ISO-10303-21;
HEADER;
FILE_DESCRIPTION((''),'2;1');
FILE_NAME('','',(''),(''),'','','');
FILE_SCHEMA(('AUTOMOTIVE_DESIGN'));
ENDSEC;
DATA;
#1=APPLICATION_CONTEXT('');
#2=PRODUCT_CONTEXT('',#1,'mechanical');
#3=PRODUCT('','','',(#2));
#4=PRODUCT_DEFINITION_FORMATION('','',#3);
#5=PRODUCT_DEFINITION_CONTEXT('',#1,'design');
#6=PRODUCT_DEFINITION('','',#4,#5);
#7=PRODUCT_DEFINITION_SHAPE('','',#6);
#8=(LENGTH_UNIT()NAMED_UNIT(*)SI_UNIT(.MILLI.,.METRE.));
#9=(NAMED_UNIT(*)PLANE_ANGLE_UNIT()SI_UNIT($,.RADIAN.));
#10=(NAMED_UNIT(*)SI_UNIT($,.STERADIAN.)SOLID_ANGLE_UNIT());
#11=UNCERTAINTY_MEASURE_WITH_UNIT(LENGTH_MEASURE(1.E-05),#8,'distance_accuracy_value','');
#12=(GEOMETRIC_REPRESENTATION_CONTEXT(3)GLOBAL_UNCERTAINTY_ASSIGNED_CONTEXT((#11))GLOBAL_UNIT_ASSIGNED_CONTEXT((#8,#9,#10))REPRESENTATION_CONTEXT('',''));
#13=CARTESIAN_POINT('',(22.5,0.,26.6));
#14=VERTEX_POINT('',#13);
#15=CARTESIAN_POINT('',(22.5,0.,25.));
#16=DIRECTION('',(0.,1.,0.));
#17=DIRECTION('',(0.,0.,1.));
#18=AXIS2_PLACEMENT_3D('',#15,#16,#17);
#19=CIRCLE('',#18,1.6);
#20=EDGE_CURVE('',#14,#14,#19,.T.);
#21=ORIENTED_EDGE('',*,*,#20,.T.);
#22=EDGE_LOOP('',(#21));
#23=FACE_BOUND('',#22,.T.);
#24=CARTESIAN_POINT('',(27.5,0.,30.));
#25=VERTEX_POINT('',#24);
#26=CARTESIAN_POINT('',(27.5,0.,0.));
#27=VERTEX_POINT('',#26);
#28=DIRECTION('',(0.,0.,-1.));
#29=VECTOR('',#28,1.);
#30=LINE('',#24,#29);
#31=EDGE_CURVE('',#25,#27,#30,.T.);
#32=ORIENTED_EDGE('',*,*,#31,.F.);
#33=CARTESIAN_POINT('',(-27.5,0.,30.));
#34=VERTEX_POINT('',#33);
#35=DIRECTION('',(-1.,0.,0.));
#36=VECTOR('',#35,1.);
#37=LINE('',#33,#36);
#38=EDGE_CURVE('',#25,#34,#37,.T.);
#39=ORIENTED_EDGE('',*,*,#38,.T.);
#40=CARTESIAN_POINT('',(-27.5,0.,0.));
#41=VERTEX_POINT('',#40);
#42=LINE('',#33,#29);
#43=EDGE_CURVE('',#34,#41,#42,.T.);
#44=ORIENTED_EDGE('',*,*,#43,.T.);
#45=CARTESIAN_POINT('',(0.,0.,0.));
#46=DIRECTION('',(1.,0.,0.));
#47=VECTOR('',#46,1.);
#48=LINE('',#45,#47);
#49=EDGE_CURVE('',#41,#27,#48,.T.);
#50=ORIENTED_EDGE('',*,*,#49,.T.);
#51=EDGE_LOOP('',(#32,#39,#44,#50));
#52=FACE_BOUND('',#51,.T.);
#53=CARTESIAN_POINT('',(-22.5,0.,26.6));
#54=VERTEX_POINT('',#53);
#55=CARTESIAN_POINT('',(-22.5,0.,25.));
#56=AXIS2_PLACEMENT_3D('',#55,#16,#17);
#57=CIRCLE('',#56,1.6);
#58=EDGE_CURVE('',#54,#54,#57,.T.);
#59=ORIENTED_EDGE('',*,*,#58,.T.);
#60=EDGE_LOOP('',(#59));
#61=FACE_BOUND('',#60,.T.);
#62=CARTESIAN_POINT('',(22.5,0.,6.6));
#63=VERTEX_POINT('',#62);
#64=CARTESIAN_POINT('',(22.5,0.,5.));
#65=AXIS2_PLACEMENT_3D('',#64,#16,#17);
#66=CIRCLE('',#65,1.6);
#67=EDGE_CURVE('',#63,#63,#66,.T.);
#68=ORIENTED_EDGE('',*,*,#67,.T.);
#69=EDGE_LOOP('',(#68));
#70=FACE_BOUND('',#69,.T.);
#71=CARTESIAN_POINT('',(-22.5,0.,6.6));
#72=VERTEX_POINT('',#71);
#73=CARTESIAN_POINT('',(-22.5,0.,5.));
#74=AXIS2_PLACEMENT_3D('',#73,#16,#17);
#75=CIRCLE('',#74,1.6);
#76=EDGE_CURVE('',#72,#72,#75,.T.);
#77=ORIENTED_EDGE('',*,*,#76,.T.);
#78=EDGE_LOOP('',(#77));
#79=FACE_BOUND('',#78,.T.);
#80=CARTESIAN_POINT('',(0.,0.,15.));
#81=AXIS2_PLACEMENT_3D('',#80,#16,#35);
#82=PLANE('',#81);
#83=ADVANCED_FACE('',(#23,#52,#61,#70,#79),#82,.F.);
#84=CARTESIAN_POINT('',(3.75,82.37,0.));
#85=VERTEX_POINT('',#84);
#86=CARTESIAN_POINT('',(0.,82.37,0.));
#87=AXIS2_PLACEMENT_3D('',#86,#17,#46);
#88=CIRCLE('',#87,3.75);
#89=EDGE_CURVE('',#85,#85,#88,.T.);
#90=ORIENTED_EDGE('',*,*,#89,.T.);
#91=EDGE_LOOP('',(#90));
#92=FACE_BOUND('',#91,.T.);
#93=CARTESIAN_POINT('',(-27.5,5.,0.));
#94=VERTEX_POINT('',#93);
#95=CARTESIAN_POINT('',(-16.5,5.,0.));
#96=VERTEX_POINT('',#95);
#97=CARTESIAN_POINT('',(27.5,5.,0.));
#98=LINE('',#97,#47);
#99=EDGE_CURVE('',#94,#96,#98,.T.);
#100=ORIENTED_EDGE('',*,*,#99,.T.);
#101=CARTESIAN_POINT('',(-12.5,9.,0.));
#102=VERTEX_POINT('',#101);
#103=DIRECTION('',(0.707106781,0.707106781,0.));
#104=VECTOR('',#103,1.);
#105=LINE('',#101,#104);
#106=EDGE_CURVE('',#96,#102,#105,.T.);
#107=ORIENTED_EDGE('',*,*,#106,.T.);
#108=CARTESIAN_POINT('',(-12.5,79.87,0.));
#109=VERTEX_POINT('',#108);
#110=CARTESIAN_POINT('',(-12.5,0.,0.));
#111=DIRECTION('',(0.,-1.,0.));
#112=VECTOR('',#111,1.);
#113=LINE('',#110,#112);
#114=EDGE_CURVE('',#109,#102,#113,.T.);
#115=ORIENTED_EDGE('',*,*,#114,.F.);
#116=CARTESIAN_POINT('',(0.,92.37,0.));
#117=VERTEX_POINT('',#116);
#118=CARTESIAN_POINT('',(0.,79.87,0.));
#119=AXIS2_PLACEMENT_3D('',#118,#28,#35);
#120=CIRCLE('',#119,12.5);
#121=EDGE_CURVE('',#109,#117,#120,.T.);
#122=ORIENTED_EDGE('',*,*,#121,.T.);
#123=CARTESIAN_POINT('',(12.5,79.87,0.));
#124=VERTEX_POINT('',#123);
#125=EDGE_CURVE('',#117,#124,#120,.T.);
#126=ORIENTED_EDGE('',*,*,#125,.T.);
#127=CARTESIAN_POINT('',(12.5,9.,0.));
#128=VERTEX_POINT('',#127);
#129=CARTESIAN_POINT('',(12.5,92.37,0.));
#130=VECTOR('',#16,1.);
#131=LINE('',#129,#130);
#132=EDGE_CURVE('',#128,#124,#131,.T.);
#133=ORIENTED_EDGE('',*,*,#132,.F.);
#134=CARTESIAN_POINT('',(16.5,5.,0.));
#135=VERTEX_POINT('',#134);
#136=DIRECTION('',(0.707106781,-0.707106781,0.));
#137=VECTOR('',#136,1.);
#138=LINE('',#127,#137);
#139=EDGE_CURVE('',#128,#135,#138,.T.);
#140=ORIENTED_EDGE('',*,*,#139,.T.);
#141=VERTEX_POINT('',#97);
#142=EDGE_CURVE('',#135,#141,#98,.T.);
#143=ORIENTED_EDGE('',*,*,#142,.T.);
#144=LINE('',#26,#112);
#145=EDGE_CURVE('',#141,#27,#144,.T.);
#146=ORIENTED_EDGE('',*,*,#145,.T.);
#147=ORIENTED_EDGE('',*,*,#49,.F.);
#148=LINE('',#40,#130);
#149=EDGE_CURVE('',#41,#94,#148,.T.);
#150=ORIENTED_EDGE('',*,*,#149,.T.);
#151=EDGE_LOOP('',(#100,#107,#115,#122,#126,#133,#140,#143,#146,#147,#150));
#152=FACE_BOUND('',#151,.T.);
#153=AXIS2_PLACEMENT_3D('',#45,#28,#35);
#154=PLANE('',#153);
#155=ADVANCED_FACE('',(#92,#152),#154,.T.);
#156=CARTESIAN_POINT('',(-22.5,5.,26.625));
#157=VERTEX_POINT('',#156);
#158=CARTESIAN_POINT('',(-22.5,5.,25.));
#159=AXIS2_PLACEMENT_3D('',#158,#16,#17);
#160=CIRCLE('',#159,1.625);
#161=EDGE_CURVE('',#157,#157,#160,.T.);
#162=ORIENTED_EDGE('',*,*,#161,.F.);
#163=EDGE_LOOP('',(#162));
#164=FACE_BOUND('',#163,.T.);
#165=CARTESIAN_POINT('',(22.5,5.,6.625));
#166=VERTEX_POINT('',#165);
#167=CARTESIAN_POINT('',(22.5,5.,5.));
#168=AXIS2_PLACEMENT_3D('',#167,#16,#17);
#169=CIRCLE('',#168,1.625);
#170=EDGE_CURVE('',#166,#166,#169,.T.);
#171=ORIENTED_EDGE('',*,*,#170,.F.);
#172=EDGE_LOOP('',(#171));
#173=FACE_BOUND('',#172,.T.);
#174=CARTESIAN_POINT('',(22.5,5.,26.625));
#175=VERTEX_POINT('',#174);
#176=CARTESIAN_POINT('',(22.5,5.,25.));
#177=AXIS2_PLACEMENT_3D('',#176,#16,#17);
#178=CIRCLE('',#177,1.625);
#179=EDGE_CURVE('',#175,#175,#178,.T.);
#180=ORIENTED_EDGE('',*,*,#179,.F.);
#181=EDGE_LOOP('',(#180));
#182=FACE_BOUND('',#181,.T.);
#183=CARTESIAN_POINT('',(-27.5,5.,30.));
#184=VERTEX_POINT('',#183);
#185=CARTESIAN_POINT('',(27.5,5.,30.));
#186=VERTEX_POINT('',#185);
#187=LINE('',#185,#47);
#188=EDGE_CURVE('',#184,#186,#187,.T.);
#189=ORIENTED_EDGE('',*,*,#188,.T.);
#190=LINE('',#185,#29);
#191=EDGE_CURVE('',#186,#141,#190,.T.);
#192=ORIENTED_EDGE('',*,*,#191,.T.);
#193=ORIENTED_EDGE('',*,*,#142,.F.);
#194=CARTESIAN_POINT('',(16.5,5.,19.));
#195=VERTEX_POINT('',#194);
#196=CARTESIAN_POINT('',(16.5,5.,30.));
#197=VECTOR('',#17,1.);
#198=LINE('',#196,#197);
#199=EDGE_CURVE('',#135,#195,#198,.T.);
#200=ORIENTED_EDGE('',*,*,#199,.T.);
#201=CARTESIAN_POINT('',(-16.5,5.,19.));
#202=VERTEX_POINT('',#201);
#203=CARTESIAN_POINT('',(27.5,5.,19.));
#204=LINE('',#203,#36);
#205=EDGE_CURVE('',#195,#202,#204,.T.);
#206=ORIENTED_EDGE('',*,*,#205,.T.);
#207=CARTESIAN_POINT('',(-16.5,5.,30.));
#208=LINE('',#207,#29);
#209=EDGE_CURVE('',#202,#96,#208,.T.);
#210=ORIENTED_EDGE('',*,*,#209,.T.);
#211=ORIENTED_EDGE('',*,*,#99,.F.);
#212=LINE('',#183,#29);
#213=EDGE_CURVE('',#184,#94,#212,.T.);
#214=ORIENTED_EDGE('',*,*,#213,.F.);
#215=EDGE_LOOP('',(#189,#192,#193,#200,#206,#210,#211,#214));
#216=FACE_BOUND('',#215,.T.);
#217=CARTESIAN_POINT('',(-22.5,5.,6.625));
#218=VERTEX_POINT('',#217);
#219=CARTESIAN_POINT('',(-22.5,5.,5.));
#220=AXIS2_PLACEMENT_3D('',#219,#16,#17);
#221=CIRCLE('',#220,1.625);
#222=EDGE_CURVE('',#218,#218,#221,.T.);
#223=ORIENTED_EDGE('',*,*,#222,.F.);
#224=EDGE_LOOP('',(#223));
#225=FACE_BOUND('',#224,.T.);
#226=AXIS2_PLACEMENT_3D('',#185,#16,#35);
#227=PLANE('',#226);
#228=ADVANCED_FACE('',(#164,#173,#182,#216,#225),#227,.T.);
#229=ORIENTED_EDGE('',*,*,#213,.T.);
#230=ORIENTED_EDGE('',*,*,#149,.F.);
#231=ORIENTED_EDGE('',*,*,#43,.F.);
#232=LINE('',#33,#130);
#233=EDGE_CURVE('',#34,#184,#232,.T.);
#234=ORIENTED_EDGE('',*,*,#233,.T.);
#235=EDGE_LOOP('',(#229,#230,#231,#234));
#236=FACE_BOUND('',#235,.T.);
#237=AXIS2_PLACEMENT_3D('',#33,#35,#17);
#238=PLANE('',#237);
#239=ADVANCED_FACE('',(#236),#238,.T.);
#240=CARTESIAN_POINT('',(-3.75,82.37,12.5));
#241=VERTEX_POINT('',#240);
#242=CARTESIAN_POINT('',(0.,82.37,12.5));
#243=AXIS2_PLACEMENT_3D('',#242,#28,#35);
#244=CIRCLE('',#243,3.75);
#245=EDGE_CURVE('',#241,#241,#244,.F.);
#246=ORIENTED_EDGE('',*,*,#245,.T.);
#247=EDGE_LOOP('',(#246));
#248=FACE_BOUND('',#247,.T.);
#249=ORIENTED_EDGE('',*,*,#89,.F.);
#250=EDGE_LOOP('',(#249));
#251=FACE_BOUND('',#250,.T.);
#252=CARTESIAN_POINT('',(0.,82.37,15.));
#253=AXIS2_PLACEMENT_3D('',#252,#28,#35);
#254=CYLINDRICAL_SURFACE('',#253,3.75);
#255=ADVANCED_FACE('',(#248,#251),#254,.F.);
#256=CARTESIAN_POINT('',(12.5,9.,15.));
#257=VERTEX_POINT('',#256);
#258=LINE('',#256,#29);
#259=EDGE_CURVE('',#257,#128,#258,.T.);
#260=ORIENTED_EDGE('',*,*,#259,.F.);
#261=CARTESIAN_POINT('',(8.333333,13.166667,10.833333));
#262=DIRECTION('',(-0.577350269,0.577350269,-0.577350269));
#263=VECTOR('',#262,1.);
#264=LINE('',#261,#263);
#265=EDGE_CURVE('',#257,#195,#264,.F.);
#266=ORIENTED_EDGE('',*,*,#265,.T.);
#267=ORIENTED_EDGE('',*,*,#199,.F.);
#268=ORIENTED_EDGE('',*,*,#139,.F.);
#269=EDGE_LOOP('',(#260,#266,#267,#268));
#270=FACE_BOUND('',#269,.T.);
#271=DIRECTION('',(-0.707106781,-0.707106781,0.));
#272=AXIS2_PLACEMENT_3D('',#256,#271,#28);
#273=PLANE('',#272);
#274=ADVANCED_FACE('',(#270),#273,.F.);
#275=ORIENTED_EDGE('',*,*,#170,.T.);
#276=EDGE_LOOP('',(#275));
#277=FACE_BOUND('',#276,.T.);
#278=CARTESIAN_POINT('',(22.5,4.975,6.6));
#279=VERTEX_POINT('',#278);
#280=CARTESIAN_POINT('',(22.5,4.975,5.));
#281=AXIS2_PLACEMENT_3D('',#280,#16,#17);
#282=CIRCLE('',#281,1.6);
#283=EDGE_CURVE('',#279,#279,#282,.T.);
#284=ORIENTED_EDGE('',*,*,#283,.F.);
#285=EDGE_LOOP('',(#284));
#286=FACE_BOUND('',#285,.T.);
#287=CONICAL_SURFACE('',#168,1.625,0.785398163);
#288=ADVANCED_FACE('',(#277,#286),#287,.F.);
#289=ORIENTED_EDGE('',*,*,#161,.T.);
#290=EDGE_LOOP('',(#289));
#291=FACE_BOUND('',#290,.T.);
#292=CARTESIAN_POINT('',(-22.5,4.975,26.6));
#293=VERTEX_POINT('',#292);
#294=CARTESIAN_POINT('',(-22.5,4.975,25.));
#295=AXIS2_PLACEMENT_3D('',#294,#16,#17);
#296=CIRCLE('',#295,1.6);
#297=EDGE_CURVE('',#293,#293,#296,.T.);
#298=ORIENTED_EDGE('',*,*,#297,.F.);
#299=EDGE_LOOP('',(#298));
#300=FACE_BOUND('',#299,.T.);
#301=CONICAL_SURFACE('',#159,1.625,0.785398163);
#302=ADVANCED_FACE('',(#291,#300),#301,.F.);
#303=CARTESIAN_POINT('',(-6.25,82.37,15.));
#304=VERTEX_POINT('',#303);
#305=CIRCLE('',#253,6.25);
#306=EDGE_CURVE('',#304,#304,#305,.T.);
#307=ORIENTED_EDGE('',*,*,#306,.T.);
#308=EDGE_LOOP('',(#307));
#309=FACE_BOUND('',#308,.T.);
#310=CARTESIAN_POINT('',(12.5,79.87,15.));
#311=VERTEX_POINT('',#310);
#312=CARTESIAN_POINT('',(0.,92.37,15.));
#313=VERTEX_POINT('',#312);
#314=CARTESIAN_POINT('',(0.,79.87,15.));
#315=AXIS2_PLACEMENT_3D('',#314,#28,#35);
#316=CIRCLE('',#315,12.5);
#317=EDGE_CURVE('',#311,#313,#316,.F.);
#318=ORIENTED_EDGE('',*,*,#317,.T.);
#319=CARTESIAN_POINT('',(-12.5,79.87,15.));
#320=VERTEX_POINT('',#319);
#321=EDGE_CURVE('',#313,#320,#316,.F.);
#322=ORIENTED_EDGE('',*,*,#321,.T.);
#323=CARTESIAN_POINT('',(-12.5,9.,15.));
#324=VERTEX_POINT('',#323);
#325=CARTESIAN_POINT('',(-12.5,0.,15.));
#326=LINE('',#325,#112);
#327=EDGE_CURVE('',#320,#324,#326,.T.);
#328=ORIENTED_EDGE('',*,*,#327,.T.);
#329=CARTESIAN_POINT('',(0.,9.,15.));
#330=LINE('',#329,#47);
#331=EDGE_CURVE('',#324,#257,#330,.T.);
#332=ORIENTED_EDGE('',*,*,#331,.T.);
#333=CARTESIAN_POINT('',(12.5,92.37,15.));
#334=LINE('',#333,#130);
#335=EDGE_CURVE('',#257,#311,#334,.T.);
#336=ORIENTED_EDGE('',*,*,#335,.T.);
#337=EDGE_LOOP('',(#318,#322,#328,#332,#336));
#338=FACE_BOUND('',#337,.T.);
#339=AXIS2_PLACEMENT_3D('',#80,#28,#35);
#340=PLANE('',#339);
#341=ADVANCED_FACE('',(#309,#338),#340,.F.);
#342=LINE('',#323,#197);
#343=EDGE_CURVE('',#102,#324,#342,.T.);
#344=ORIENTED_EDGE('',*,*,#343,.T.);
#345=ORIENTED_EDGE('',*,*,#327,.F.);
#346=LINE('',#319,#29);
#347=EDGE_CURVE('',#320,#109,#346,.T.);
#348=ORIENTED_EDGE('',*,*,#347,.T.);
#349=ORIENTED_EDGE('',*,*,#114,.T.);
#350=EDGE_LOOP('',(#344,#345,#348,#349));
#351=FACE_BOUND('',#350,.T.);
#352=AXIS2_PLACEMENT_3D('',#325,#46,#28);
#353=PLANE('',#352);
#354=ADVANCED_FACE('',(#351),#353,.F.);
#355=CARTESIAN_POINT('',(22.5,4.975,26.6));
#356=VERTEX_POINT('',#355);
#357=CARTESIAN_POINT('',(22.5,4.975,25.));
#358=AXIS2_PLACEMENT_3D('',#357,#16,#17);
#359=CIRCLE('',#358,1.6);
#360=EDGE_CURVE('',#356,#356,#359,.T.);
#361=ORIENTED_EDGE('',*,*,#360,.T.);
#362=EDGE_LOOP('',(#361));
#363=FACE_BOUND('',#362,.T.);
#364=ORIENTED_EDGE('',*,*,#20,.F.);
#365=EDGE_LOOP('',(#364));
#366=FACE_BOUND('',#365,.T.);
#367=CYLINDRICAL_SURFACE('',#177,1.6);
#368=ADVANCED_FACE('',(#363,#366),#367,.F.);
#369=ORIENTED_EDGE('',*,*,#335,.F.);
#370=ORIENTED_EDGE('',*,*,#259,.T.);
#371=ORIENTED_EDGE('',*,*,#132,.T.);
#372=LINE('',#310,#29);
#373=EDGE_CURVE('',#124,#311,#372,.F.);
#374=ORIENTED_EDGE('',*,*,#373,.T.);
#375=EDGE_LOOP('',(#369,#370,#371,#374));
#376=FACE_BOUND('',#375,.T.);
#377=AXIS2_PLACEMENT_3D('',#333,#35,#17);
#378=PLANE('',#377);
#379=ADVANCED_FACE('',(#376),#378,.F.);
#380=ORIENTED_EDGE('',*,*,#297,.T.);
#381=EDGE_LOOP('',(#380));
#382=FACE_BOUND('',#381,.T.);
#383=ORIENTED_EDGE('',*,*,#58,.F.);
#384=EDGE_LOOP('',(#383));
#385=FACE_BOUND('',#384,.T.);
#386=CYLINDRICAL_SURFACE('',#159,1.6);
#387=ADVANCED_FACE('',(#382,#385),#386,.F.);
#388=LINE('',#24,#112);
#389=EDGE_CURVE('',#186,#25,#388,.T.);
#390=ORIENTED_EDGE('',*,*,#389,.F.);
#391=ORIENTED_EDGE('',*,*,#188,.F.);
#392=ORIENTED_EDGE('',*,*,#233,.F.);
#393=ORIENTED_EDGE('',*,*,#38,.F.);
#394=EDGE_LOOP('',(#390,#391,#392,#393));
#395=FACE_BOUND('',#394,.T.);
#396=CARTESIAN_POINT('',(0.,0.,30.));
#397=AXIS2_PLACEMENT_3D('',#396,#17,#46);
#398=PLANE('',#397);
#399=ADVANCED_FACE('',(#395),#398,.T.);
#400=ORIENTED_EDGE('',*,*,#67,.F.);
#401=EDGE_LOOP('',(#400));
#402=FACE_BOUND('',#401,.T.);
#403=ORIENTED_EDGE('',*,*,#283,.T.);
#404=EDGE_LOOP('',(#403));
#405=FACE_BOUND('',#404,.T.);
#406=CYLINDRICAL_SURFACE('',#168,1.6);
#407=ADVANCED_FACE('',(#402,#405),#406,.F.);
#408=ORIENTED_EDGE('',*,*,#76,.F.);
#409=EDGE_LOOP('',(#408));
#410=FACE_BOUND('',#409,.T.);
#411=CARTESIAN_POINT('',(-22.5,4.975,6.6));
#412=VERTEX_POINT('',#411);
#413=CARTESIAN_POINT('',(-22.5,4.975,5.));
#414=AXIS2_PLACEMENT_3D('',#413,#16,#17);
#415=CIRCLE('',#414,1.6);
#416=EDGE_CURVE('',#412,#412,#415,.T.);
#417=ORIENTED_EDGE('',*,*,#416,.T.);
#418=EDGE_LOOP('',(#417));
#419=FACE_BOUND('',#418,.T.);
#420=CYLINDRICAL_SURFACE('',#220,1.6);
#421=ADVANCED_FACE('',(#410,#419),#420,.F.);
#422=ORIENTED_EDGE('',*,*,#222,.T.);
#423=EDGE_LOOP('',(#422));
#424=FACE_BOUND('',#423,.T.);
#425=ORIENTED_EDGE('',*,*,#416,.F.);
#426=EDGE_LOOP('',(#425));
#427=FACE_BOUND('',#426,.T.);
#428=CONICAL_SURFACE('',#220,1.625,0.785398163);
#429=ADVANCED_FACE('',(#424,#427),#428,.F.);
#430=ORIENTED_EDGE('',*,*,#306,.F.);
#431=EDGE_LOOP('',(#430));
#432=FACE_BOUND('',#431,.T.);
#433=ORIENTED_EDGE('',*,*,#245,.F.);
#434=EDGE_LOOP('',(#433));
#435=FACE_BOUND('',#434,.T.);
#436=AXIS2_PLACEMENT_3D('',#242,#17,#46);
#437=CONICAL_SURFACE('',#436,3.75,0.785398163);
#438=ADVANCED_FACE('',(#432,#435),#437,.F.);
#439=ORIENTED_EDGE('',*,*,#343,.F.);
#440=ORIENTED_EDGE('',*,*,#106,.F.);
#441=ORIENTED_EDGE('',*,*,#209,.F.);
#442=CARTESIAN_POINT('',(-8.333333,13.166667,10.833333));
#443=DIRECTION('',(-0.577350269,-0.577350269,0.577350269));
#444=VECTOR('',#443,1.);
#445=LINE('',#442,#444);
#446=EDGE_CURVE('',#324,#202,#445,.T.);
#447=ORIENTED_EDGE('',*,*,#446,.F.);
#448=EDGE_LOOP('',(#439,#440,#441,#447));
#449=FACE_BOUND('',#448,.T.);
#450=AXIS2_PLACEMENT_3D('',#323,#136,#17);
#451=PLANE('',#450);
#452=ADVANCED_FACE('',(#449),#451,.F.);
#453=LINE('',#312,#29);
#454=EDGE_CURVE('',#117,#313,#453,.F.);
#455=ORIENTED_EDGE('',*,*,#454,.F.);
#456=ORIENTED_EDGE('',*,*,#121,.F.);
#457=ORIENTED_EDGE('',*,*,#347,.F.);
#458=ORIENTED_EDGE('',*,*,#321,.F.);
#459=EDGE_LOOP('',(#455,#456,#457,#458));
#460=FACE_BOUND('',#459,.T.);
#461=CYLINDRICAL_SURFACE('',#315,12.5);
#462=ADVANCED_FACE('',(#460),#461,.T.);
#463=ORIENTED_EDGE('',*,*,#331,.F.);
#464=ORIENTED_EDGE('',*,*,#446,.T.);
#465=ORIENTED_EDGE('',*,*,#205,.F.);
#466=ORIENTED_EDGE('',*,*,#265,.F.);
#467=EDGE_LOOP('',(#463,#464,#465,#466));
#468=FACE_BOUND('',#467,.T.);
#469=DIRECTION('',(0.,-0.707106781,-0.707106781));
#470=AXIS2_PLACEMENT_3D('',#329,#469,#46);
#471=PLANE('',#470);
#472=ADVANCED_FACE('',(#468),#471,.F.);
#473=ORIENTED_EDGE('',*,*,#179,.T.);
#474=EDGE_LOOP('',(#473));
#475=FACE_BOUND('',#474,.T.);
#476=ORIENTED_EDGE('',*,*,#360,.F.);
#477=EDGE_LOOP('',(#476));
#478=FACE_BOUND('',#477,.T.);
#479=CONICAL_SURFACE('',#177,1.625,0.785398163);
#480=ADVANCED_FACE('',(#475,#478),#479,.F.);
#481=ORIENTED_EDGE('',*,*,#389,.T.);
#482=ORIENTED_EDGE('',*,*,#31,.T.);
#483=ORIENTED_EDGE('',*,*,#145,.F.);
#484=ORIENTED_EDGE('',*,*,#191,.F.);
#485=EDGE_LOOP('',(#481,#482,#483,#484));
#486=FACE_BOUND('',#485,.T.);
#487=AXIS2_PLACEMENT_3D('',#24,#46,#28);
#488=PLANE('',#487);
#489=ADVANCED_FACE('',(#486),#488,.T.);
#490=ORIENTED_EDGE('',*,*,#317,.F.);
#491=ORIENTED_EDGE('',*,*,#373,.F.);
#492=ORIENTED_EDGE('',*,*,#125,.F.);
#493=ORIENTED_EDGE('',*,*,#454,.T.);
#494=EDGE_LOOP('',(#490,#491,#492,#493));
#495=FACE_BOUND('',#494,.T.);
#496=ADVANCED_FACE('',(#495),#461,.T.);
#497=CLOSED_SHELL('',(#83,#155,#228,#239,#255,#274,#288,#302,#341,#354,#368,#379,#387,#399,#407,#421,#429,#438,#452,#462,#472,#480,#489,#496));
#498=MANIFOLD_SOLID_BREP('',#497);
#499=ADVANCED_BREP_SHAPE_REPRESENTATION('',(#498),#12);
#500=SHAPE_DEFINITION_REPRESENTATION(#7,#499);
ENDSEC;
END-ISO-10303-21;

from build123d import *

# Parameters (mm, degrees)
SKETCH1_R                            = 3.75
BOSS_EXTRUDE1_DEPTH                  = 15
SKETCH2_W                            = 55
SKETCH2_H                            = 5
BOSS_EXTRUDE2_DEPTH                  = 30
F_3_2_3_2_DIAMETER_HOLE1_D           = 3.2
F_3_2_3_2_DIAMETER_HOLE1_CSINK_D     = 3.25
F_3_2_3_2_DIAMETER_HOLE1_CSINK_ANGLE = 90
CHAMFER1_SIZE                        = 4
FILLET2_R                            = 12.5
CHAMFER2_SIZE                        = 2.5


with BuildPart() as part:
    # Sketch1 → Boss-Extrude1 (new body)
    with BuildSketch(Plane.XY):
        Polygon((0, 0), (-12.5, 0), (-12.5, 92.37), (12.5, 92.37), (12.5, 0), align=None)
        with Locations((0, 82.37)):
            Circle(SKETCH1_R, mode=Mode.SUBTRACT)
    extrude(amount=BOSS_EXTRUDE1_DEPTH)

    # Sketch2 → Boss-Extrude2 (add)
    with BuildSketch(Plane(origin=(0, 0, 0), x_dir=(-1, 0, 0), z_dir=(0, 0, -1))):
        with Locations((0, 2.5)):
            Rectangle(SKETCH2_W, SKETCH2_H)
    extrude(amount=-BOSS_EXTRUDE2_DEPTH)

    # Ø3.2 (3.2) Diameter Hole1 (through all)
    with Locations(Plane(origin=(0, 5, 0), x_dir=(1, 0, 0), z_dir=(0, 1, 0))):
        with Locations((-22.5, -5), (-22.5, -25), (22.5, -25), (22.5, -5)):
            CounterSinkHole(F_3_2_3_2_DIAMETER_HOLE1_D / 2, F_3_2_3_2_DIAMETER_HOLE1_CSINK_D / 2, counter_sink_angle=F_3_2_3_2_DIAMETER_HOLE1_CSINK_ANGLE)

    # Chamfer1
    chamfer1_edges = [part.edges().sort_by_distance(p)[0] for p in [
        (-12.5, 5, 7.5),
        (0, 5, 15),
        (12.5, 5, 7.5),
    ]]
    chamfer(chamfer1_edges, length=CHAMFER1_SIZE)

    # Fillet2
    fillet2_edges = [part.edges().sort_by_distance(p)[0] for p in [
        (12.5, 92.37, 7.5),
        (-12.5, 92.37, 7.5),
    ]]
    fillet(fillet2_edges, radius=FILLET2_R - 0.0001)  # a hair under: the kernel refuses the full size

    # Chamfer2
    chamfer2_edges = [part.edges().sort_by_distance(p)[0] for p in [
        (-3.75, 82.37, 15),
    ]]
    chamfer(chamfer2_edges, length=CHAMFER2_SIZE)


solid = part.part
